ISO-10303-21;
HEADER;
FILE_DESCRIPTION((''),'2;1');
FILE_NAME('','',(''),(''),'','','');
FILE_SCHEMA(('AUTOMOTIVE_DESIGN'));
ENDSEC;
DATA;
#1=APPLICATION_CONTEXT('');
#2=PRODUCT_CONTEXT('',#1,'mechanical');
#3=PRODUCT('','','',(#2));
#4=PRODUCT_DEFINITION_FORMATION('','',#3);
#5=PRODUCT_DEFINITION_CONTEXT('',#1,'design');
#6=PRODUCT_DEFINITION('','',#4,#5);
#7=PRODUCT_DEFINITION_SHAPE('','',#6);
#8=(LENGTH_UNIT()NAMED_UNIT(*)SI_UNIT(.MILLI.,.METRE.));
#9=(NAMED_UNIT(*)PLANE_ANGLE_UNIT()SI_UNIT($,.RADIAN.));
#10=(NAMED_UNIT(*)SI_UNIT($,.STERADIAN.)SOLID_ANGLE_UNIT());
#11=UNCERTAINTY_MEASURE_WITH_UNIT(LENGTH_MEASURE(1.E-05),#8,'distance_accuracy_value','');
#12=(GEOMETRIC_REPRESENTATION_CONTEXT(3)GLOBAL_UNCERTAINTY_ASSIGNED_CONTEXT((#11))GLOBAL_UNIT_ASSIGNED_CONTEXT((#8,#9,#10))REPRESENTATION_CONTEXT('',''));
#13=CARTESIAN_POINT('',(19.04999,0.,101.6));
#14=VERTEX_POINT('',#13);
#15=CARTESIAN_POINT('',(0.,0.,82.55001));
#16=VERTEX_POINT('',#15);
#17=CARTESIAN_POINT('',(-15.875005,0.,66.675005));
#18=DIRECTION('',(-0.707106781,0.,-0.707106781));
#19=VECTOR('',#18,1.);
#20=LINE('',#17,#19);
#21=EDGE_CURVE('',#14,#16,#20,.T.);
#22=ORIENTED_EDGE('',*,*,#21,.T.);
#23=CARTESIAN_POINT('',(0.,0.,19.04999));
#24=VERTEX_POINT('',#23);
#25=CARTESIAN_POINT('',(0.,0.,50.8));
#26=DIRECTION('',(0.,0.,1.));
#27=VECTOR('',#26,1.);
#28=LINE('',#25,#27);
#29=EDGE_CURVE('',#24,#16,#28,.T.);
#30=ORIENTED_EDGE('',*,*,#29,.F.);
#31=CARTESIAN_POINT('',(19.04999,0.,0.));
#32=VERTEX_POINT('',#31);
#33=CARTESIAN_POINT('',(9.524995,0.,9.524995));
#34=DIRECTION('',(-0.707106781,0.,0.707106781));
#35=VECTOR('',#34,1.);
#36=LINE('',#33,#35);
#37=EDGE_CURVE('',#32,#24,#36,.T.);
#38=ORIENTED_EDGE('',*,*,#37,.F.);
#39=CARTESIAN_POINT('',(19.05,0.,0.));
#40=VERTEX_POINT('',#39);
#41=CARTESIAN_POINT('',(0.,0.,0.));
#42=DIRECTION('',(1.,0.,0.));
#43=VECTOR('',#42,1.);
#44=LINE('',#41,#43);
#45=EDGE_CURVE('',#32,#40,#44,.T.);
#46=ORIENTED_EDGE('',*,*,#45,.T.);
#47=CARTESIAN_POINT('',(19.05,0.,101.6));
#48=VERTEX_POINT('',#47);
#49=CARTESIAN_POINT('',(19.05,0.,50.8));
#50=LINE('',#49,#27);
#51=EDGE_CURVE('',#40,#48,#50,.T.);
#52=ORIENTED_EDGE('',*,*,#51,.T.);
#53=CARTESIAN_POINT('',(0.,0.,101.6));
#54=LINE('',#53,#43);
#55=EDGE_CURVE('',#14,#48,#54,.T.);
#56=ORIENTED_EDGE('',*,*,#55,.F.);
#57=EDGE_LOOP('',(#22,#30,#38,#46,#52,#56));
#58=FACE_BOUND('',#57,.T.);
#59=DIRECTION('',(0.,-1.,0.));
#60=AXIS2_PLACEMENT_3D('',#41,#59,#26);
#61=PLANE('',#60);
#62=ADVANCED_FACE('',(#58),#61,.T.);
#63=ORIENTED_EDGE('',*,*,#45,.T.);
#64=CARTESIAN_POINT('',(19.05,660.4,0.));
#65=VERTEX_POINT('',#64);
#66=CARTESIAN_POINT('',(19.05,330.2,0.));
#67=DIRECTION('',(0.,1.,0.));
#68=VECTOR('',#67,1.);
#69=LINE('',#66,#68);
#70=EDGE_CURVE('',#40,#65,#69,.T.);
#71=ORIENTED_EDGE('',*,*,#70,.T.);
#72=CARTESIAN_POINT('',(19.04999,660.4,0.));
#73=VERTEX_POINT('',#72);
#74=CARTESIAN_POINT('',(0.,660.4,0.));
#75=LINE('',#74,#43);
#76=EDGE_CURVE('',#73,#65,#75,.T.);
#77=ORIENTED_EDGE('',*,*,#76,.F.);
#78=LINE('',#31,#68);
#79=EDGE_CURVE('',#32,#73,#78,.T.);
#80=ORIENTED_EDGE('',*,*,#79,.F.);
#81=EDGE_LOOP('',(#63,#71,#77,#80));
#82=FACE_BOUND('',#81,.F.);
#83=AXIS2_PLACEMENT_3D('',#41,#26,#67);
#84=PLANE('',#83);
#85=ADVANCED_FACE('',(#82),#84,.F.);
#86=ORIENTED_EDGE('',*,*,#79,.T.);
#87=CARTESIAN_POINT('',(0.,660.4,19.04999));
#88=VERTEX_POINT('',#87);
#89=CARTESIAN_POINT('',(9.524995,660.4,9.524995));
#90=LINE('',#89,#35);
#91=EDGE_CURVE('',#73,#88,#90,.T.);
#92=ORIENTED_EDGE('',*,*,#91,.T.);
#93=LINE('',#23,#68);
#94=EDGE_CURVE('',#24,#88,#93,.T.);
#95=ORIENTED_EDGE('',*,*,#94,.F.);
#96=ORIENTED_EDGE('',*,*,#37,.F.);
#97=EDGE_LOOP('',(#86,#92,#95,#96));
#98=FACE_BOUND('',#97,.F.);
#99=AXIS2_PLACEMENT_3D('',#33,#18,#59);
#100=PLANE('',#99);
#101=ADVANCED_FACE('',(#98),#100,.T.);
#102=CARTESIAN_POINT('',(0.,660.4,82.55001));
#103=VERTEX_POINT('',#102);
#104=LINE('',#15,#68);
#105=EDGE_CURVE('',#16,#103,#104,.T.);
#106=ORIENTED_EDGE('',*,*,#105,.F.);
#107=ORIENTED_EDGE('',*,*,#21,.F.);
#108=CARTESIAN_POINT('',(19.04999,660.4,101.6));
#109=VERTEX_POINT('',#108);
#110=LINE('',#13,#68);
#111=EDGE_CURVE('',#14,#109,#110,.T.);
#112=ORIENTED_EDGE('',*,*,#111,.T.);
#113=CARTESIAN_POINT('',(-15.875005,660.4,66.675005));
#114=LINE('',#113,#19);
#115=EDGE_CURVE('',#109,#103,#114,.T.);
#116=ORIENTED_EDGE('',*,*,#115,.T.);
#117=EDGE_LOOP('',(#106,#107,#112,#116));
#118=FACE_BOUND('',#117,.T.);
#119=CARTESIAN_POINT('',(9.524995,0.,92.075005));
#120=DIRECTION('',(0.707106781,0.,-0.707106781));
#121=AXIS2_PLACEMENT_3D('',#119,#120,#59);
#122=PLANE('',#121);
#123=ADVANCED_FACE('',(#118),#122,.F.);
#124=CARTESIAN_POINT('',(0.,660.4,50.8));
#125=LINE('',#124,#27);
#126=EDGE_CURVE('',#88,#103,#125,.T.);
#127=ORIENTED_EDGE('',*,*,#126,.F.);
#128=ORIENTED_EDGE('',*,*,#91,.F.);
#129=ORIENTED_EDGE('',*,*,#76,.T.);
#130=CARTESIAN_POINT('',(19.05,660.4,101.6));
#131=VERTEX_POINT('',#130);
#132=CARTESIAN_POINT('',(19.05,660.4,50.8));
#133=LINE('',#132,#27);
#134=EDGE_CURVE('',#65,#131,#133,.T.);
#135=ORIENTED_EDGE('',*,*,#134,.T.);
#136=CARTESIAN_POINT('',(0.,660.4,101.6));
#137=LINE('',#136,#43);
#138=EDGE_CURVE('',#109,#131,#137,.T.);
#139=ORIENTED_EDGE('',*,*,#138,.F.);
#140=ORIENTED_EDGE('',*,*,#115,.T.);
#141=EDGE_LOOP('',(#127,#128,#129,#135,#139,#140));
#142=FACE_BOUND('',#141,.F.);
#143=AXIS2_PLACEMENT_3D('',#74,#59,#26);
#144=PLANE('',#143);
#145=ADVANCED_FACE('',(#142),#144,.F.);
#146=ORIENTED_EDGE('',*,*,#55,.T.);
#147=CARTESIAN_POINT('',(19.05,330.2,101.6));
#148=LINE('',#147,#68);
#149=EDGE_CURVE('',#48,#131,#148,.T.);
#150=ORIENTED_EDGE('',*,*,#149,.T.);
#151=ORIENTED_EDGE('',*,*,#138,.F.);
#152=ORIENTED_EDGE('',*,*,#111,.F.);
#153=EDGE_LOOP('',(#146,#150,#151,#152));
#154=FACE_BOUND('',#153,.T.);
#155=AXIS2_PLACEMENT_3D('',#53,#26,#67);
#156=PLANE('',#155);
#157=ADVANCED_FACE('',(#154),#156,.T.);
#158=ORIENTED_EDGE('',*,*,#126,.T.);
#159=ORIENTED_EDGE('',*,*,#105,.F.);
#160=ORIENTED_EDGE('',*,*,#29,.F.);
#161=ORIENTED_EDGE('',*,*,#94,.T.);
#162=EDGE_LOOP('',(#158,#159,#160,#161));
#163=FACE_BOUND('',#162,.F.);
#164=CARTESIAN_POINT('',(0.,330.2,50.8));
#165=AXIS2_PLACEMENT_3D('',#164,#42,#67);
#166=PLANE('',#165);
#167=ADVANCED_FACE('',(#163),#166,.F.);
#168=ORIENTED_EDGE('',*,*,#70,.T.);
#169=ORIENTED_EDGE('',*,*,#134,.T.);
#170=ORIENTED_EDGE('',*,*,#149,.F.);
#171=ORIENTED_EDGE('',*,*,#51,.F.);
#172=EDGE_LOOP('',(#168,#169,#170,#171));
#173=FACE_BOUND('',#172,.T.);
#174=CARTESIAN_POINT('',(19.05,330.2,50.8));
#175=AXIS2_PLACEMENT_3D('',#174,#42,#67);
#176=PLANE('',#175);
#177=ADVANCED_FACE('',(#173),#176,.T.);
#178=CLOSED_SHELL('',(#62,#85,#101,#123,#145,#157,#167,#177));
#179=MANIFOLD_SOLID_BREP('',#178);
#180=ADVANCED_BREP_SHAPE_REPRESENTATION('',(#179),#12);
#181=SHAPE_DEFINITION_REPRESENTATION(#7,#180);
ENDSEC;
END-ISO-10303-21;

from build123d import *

# Parameters (mm, degrees)
F0_W     = 660.4
F0_H     = 101.6
F1_DEPTH = 19.05
F2_SIZE  = 19.04999


# Not quite as in the source:
# - a fillet or chamfer is up to 0.001 mm smaller than in the source, because OpenCascade refuses the exact size


with BuildPart() as f1:
    # F0 (on Right) → F1 (new body)
    with BuildSketch(Plane.YZ):
        with Locations((330.2, 50.8)):
            Rectangle(F0_W, F0_H)
    extrude(amount=F1_DEPTH)

    # F2 (size 19.05 in the source; OpenCascade refuses exactly that, so slightly less here)
    f2_edges = [f1.edges().sort_by_distance(p)[0] for p in [
        (0, 330.2, 101.6),
        (0, 330.2, 0),
    ]]
    chamfer(f2_edges, length=F2_SIZE)


solid = f1.part
